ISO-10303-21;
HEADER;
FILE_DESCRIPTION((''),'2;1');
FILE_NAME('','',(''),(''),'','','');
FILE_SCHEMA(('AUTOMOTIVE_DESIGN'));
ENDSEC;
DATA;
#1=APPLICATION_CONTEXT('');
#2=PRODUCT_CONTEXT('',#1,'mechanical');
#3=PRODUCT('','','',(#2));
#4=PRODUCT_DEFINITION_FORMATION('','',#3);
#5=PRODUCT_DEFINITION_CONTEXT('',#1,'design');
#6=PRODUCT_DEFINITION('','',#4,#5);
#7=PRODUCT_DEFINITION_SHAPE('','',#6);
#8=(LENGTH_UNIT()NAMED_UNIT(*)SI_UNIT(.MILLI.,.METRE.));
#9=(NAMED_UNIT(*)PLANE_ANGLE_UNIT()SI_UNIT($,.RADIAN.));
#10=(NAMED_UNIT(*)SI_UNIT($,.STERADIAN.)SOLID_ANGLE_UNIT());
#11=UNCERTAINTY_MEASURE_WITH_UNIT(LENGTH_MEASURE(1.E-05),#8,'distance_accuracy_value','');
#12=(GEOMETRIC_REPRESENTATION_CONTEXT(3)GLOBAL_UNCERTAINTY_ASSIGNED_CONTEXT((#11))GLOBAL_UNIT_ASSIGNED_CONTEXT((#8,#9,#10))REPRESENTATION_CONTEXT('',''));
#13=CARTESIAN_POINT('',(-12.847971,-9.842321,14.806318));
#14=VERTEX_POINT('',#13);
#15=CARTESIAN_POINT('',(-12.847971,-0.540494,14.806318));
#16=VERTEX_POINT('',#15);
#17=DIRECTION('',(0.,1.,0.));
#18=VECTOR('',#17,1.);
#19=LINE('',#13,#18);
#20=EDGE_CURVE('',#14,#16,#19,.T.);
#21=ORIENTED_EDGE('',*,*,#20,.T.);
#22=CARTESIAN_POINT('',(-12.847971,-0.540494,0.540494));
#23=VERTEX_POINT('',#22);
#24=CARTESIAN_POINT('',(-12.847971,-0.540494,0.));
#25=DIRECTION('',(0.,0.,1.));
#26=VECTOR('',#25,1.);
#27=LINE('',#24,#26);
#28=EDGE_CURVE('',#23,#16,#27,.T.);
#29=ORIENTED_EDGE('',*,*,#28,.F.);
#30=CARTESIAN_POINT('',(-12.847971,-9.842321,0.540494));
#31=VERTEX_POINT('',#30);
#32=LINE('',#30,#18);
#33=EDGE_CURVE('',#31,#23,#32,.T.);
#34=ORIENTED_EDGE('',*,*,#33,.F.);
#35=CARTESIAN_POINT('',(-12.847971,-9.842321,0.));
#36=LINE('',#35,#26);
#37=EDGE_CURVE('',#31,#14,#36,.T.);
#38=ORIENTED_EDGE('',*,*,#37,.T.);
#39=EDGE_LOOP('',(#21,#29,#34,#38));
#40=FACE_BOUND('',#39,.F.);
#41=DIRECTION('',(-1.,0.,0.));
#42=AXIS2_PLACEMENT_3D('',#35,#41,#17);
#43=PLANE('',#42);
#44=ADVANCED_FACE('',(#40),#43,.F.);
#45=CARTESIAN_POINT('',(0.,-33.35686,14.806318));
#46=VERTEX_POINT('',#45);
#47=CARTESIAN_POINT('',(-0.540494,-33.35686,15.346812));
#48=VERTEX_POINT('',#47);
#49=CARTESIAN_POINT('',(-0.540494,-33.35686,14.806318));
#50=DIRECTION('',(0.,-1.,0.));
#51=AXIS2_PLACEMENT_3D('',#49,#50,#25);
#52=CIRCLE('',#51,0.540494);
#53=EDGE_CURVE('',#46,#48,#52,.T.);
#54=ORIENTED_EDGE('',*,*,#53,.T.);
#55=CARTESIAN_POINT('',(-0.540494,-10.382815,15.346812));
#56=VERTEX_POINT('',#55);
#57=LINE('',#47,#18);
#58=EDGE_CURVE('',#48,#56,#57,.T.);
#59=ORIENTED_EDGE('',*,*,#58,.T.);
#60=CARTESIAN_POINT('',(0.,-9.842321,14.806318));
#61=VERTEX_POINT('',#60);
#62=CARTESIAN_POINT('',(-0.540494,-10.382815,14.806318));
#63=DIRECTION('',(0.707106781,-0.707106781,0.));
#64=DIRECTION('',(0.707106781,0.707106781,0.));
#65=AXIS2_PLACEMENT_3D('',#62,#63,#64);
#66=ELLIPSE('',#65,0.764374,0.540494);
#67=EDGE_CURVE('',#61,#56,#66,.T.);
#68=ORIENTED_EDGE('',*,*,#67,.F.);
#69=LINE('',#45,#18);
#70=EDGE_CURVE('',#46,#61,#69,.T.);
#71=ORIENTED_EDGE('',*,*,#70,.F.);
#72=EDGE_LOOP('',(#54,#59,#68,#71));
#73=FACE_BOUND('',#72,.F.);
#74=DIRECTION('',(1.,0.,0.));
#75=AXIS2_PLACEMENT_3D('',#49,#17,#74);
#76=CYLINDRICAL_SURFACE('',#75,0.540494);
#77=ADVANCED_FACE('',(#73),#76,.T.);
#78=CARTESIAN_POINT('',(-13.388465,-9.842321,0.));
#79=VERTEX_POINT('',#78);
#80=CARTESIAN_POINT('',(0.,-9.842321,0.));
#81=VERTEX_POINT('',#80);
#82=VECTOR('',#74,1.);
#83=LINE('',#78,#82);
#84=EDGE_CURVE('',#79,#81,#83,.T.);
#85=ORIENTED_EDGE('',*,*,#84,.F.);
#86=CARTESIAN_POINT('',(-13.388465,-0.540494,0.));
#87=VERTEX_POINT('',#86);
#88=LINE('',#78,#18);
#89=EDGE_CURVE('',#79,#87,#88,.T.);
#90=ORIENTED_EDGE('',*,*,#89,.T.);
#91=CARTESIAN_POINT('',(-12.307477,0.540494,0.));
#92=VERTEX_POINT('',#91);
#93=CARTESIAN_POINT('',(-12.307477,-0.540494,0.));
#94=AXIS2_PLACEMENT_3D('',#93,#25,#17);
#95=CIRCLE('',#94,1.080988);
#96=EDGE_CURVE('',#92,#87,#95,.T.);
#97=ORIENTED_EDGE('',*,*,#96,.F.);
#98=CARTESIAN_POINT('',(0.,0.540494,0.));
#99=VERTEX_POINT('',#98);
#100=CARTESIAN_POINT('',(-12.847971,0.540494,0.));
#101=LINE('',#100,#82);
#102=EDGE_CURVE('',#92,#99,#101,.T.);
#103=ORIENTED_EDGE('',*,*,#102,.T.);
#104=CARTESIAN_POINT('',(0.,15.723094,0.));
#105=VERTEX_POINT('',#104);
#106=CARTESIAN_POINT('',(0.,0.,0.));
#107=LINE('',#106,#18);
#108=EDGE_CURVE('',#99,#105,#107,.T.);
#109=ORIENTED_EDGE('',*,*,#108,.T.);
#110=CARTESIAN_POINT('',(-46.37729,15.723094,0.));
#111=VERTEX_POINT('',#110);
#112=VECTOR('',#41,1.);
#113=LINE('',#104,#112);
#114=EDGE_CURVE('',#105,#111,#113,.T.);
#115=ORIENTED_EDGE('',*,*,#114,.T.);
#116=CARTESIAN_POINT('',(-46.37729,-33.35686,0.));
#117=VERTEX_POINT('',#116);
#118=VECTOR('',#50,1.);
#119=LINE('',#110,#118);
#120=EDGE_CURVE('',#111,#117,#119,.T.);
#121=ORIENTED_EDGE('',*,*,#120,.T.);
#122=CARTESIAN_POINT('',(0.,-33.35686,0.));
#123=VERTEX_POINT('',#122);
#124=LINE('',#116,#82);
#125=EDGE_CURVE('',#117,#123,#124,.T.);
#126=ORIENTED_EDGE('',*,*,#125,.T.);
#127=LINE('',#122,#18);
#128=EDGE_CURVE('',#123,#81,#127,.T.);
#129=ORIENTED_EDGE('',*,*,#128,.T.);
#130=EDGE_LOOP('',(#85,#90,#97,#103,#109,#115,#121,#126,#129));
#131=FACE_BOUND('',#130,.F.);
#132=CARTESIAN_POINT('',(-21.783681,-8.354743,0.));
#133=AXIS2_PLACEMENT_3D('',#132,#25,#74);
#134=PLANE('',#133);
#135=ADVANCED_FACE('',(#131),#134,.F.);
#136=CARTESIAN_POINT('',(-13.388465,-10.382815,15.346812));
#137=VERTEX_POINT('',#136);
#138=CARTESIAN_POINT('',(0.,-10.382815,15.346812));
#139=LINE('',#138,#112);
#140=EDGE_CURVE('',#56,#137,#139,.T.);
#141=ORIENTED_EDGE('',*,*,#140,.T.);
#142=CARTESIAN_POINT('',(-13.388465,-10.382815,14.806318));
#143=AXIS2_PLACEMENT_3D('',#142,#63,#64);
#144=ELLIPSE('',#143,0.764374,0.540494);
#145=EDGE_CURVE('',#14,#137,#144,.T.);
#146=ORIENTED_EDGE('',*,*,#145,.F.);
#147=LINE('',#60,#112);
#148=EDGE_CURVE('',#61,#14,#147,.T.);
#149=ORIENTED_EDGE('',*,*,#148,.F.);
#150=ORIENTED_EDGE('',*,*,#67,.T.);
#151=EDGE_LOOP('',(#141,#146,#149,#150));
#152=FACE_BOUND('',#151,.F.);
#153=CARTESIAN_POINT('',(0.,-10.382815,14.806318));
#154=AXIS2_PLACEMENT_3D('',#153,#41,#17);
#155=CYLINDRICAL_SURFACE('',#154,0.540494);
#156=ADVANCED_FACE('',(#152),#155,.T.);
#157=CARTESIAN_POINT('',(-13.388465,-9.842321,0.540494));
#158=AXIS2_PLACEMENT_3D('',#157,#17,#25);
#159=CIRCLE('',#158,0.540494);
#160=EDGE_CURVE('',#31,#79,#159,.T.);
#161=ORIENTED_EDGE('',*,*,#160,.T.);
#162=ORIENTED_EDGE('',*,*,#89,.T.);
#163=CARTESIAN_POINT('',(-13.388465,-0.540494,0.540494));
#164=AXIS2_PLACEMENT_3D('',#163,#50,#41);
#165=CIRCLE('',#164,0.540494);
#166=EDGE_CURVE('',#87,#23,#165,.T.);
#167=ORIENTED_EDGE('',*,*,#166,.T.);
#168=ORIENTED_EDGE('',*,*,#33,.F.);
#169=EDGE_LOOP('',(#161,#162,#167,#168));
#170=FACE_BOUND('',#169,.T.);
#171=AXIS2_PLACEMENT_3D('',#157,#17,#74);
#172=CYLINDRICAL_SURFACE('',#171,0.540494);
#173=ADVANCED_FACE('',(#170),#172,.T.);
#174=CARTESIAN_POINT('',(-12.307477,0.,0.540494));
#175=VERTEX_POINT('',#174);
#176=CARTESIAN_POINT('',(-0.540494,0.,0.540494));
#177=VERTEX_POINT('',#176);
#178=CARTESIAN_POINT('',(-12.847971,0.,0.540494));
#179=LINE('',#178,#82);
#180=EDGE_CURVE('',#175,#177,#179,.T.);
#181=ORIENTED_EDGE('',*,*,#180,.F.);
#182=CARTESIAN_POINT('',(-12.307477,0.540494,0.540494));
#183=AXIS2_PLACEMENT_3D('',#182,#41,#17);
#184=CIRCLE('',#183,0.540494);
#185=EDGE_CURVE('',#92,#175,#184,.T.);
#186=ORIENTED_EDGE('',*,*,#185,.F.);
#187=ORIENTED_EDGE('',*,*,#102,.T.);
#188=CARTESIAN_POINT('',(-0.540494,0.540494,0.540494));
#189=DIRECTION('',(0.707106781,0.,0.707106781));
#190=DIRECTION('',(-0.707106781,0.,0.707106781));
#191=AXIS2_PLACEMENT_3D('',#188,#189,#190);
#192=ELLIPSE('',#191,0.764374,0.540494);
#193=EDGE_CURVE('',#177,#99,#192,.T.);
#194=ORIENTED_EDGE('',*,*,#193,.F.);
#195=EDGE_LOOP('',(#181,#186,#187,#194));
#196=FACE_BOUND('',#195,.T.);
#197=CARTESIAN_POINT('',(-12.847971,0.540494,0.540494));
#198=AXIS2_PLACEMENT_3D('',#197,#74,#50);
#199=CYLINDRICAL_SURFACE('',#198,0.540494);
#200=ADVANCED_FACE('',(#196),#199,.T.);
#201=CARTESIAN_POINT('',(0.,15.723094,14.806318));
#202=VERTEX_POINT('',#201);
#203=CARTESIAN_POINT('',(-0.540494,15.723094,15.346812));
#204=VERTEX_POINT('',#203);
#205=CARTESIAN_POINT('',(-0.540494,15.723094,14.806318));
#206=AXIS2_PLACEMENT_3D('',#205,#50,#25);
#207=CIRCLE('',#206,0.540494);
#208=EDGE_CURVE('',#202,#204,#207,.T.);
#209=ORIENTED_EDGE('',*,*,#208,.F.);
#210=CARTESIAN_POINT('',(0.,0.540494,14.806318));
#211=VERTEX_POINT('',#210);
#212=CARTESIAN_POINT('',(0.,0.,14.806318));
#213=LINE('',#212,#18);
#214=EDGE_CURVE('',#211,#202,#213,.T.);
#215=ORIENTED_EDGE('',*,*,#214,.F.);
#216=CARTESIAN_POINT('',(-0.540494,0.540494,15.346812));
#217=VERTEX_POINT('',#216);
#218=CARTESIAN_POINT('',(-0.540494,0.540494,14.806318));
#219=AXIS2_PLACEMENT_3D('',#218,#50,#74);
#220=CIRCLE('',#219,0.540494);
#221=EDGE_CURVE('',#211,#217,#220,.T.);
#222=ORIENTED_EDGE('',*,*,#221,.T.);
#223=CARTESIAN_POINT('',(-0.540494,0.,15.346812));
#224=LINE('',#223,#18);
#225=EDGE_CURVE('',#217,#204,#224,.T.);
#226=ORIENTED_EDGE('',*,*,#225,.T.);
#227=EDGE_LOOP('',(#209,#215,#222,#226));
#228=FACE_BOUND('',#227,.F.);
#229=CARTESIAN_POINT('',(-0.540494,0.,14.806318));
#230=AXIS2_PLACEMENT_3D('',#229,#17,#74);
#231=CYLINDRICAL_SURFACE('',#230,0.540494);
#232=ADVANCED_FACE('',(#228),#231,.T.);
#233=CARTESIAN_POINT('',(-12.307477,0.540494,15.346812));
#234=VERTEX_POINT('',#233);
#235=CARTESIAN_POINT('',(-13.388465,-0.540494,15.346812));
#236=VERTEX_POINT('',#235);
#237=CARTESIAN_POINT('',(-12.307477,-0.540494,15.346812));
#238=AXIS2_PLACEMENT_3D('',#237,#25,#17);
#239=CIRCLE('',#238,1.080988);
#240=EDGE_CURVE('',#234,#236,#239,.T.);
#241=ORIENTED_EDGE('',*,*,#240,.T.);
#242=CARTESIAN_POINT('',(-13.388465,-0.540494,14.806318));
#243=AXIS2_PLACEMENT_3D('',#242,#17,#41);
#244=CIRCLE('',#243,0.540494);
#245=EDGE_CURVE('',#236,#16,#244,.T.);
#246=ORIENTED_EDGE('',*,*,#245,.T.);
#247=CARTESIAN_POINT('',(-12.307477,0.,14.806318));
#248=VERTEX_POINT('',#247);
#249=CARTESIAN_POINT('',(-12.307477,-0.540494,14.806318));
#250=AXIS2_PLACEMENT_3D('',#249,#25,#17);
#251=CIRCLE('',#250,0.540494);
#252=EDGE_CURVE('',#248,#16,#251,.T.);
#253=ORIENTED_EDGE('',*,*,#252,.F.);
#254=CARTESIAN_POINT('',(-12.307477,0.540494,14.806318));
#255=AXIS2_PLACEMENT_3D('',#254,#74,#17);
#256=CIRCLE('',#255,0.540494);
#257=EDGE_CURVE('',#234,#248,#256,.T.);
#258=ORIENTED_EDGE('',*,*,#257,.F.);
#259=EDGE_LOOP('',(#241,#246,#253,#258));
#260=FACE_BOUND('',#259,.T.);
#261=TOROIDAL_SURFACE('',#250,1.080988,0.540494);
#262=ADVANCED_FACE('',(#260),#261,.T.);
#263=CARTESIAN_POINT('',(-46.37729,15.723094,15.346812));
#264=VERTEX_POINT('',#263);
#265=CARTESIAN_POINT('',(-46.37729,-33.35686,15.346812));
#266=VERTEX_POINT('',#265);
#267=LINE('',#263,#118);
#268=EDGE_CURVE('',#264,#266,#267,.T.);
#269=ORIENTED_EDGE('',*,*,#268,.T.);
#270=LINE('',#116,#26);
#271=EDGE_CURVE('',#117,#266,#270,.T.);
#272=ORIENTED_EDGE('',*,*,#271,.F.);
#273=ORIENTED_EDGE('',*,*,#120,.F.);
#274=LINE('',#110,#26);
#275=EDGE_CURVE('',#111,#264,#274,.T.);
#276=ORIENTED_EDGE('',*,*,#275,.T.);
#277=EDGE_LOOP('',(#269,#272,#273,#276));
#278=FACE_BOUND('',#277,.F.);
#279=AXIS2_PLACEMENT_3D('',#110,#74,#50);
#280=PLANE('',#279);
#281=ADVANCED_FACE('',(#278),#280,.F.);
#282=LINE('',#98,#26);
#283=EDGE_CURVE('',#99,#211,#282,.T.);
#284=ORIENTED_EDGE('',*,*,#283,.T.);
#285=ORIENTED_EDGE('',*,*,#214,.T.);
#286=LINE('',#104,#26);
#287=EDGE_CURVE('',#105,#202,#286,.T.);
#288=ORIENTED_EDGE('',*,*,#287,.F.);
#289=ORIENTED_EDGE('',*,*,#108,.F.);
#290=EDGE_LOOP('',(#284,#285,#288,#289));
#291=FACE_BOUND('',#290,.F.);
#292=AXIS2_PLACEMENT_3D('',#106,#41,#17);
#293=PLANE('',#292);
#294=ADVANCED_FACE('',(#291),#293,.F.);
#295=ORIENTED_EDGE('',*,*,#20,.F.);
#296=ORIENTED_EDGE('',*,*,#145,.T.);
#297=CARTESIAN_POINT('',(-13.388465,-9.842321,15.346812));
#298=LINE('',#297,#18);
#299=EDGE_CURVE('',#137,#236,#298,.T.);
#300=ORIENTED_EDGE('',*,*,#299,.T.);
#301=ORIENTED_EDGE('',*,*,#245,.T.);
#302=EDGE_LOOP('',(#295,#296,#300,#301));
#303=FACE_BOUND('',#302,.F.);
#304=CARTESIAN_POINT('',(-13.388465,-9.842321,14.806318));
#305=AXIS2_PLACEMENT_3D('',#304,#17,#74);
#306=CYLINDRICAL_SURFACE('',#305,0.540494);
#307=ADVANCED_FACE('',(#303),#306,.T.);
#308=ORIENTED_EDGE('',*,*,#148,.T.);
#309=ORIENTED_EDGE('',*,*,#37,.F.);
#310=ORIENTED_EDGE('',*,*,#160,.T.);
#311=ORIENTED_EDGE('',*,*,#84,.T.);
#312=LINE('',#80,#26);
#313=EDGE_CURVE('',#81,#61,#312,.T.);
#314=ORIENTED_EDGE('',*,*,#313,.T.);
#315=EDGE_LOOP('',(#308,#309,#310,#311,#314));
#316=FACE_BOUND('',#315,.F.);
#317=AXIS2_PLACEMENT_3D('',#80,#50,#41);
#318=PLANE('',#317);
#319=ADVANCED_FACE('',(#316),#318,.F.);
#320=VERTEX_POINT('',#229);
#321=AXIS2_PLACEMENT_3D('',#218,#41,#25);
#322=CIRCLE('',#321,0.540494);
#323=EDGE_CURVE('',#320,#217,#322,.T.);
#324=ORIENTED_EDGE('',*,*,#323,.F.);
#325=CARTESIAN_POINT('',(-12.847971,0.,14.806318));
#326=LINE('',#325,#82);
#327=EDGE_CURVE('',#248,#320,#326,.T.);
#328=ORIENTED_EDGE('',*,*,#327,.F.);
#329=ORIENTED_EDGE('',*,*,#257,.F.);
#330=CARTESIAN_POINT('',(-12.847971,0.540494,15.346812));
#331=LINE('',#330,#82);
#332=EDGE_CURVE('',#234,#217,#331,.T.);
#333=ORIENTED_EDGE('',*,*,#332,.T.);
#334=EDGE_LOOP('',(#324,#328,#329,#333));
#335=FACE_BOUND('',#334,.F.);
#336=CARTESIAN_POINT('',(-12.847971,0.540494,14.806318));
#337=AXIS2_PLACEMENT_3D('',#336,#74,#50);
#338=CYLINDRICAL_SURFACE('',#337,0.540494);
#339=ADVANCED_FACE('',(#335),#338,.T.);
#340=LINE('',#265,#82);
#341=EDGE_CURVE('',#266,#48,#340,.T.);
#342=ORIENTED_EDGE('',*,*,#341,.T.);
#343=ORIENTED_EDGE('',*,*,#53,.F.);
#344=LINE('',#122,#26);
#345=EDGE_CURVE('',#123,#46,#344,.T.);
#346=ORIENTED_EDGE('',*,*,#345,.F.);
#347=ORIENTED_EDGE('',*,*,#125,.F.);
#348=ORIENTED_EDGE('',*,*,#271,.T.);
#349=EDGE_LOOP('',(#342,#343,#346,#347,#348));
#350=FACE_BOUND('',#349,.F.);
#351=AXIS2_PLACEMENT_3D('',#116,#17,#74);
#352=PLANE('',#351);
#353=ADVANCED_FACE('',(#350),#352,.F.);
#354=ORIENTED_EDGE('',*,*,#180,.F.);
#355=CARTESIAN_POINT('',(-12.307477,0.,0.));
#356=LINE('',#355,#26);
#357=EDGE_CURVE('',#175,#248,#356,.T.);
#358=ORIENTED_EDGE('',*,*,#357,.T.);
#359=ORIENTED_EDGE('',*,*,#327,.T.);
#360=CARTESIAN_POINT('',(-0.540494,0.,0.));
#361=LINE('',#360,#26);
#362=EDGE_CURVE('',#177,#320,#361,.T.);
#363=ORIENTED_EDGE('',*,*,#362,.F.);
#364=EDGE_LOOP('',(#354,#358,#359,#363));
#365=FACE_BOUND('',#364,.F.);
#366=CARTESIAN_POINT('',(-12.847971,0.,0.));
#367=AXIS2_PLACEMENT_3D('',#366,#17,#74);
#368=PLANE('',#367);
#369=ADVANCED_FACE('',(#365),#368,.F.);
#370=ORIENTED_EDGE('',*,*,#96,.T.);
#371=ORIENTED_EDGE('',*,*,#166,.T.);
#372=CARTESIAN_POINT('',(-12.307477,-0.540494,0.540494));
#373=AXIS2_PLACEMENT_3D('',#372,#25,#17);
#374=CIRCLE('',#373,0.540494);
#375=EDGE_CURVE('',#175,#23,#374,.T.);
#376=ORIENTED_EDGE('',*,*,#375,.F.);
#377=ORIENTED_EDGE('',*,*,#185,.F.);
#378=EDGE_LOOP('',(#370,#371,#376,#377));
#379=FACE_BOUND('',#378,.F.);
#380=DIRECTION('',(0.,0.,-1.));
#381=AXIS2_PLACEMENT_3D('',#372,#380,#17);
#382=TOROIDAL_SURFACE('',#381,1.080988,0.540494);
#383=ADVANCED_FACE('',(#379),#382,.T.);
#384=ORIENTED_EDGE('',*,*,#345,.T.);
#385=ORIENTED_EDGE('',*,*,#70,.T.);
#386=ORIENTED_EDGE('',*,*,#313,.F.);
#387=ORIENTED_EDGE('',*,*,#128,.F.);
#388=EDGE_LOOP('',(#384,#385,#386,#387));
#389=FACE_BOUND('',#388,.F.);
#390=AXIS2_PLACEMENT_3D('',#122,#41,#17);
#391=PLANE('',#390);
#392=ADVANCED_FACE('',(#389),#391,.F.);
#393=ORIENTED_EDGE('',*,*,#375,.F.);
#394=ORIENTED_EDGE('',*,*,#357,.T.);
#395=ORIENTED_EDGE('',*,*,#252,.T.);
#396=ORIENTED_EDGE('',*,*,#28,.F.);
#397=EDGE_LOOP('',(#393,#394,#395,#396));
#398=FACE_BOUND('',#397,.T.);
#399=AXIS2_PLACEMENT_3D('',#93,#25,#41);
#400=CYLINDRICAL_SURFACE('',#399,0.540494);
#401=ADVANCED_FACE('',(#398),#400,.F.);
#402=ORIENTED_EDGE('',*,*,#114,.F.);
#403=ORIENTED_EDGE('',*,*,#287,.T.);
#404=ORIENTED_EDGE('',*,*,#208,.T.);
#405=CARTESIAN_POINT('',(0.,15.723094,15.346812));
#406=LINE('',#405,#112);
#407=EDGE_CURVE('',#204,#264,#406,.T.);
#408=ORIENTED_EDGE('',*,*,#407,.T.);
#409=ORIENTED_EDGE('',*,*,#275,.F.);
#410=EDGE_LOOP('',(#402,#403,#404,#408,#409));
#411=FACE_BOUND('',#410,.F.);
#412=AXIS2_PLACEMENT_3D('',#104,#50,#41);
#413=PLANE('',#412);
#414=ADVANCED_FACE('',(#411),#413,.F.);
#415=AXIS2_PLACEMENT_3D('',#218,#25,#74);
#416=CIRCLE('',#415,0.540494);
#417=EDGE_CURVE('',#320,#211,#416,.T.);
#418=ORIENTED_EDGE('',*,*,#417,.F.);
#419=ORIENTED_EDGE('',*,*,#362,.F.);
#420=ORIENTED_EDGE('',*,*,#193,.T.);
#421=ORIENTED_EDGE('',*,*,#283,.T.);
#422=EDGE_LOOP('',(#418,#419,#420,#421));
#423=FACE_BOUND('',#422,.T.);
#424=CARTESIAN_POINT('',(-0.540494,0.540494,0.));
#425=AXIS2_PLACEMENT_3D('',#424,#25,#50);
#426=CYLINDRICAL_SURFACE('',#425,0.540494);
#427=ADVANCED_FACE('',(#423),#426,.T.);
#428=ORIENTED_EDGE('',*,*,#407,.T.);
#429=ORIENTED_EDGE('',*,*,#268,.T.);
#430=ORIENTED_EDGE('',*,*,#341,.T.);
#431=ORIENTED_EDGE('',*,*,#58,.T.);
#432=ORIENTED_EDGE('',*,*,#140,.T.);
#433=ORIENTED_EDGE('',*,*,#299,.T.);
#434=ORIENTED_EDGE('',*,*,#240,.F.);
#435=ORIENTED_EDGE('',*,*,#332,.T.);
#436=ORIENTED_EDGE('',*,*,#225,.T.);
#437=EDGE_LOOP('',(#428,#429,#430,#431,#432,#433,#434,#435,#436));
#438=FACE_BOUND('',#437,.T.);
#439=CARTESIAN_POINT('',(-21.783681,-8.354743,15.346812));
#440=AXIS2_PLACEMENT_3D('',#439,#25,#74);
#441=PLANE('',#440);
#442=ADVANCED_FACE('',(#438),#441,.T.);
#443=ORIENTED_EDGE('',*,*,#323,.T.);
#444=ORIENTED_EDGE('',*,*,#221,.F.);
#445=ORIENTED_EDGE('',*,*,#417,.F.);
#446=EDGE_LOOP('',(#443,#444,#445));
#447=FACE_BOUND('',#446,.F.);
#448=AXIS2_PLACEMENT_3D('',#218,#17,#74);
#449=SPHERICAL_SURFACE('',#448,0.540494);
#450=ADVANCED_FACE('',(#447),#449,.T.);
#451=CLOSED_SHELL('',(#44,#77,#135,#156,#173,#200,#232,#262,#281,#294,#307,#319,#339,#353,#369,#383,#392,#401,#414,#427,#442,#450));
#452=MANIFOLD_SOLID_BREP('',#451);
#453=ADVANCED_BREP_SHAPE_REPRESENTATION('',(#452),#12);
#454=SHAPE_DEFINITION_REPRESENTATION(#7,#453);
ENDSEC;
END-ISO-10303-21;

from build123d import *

# Parameters (mm, degrees)
F1_DEPTH = 15.3468120843
F2_R     = 0.540493976


with BuildPart() as f1:
    # F0 (on Top) → F1 (new body)
    with BuildSketch(Plane.XY):
        Polygon((-46.3772900403, 15.7230943441), (-46.3772900403, -33.35686028), (0, -33.35686028), (0, -9.8423212767), (-12.8479711711, -9.8423212767), (-12.8479711711, 0), (0, 0), (0, 15.7230943441), align=None)
    extrude(amount=F1_DEPTH)

    # F2
    f2_edges = [f1.edges().sort_by_distance(p)[0] for p in [
        (0, -21.599591, 15.346812),
        (0, 7.861547, 15.346812),
        (-12.847971, -4.921161, 15.346812),
        (-6.423986, -9.842321, 15.346812),
        (-12.847971, 0, 7.673406),
        (0, 0, 7.673406),
        (-6.423986, 0, 0),
        (-6.423986, 0, 15.346812),
        (-12.847971, -4.921161, 0),
    ]]
    fillet(f2_edges, radius=F2_R)


solid = f1.part
